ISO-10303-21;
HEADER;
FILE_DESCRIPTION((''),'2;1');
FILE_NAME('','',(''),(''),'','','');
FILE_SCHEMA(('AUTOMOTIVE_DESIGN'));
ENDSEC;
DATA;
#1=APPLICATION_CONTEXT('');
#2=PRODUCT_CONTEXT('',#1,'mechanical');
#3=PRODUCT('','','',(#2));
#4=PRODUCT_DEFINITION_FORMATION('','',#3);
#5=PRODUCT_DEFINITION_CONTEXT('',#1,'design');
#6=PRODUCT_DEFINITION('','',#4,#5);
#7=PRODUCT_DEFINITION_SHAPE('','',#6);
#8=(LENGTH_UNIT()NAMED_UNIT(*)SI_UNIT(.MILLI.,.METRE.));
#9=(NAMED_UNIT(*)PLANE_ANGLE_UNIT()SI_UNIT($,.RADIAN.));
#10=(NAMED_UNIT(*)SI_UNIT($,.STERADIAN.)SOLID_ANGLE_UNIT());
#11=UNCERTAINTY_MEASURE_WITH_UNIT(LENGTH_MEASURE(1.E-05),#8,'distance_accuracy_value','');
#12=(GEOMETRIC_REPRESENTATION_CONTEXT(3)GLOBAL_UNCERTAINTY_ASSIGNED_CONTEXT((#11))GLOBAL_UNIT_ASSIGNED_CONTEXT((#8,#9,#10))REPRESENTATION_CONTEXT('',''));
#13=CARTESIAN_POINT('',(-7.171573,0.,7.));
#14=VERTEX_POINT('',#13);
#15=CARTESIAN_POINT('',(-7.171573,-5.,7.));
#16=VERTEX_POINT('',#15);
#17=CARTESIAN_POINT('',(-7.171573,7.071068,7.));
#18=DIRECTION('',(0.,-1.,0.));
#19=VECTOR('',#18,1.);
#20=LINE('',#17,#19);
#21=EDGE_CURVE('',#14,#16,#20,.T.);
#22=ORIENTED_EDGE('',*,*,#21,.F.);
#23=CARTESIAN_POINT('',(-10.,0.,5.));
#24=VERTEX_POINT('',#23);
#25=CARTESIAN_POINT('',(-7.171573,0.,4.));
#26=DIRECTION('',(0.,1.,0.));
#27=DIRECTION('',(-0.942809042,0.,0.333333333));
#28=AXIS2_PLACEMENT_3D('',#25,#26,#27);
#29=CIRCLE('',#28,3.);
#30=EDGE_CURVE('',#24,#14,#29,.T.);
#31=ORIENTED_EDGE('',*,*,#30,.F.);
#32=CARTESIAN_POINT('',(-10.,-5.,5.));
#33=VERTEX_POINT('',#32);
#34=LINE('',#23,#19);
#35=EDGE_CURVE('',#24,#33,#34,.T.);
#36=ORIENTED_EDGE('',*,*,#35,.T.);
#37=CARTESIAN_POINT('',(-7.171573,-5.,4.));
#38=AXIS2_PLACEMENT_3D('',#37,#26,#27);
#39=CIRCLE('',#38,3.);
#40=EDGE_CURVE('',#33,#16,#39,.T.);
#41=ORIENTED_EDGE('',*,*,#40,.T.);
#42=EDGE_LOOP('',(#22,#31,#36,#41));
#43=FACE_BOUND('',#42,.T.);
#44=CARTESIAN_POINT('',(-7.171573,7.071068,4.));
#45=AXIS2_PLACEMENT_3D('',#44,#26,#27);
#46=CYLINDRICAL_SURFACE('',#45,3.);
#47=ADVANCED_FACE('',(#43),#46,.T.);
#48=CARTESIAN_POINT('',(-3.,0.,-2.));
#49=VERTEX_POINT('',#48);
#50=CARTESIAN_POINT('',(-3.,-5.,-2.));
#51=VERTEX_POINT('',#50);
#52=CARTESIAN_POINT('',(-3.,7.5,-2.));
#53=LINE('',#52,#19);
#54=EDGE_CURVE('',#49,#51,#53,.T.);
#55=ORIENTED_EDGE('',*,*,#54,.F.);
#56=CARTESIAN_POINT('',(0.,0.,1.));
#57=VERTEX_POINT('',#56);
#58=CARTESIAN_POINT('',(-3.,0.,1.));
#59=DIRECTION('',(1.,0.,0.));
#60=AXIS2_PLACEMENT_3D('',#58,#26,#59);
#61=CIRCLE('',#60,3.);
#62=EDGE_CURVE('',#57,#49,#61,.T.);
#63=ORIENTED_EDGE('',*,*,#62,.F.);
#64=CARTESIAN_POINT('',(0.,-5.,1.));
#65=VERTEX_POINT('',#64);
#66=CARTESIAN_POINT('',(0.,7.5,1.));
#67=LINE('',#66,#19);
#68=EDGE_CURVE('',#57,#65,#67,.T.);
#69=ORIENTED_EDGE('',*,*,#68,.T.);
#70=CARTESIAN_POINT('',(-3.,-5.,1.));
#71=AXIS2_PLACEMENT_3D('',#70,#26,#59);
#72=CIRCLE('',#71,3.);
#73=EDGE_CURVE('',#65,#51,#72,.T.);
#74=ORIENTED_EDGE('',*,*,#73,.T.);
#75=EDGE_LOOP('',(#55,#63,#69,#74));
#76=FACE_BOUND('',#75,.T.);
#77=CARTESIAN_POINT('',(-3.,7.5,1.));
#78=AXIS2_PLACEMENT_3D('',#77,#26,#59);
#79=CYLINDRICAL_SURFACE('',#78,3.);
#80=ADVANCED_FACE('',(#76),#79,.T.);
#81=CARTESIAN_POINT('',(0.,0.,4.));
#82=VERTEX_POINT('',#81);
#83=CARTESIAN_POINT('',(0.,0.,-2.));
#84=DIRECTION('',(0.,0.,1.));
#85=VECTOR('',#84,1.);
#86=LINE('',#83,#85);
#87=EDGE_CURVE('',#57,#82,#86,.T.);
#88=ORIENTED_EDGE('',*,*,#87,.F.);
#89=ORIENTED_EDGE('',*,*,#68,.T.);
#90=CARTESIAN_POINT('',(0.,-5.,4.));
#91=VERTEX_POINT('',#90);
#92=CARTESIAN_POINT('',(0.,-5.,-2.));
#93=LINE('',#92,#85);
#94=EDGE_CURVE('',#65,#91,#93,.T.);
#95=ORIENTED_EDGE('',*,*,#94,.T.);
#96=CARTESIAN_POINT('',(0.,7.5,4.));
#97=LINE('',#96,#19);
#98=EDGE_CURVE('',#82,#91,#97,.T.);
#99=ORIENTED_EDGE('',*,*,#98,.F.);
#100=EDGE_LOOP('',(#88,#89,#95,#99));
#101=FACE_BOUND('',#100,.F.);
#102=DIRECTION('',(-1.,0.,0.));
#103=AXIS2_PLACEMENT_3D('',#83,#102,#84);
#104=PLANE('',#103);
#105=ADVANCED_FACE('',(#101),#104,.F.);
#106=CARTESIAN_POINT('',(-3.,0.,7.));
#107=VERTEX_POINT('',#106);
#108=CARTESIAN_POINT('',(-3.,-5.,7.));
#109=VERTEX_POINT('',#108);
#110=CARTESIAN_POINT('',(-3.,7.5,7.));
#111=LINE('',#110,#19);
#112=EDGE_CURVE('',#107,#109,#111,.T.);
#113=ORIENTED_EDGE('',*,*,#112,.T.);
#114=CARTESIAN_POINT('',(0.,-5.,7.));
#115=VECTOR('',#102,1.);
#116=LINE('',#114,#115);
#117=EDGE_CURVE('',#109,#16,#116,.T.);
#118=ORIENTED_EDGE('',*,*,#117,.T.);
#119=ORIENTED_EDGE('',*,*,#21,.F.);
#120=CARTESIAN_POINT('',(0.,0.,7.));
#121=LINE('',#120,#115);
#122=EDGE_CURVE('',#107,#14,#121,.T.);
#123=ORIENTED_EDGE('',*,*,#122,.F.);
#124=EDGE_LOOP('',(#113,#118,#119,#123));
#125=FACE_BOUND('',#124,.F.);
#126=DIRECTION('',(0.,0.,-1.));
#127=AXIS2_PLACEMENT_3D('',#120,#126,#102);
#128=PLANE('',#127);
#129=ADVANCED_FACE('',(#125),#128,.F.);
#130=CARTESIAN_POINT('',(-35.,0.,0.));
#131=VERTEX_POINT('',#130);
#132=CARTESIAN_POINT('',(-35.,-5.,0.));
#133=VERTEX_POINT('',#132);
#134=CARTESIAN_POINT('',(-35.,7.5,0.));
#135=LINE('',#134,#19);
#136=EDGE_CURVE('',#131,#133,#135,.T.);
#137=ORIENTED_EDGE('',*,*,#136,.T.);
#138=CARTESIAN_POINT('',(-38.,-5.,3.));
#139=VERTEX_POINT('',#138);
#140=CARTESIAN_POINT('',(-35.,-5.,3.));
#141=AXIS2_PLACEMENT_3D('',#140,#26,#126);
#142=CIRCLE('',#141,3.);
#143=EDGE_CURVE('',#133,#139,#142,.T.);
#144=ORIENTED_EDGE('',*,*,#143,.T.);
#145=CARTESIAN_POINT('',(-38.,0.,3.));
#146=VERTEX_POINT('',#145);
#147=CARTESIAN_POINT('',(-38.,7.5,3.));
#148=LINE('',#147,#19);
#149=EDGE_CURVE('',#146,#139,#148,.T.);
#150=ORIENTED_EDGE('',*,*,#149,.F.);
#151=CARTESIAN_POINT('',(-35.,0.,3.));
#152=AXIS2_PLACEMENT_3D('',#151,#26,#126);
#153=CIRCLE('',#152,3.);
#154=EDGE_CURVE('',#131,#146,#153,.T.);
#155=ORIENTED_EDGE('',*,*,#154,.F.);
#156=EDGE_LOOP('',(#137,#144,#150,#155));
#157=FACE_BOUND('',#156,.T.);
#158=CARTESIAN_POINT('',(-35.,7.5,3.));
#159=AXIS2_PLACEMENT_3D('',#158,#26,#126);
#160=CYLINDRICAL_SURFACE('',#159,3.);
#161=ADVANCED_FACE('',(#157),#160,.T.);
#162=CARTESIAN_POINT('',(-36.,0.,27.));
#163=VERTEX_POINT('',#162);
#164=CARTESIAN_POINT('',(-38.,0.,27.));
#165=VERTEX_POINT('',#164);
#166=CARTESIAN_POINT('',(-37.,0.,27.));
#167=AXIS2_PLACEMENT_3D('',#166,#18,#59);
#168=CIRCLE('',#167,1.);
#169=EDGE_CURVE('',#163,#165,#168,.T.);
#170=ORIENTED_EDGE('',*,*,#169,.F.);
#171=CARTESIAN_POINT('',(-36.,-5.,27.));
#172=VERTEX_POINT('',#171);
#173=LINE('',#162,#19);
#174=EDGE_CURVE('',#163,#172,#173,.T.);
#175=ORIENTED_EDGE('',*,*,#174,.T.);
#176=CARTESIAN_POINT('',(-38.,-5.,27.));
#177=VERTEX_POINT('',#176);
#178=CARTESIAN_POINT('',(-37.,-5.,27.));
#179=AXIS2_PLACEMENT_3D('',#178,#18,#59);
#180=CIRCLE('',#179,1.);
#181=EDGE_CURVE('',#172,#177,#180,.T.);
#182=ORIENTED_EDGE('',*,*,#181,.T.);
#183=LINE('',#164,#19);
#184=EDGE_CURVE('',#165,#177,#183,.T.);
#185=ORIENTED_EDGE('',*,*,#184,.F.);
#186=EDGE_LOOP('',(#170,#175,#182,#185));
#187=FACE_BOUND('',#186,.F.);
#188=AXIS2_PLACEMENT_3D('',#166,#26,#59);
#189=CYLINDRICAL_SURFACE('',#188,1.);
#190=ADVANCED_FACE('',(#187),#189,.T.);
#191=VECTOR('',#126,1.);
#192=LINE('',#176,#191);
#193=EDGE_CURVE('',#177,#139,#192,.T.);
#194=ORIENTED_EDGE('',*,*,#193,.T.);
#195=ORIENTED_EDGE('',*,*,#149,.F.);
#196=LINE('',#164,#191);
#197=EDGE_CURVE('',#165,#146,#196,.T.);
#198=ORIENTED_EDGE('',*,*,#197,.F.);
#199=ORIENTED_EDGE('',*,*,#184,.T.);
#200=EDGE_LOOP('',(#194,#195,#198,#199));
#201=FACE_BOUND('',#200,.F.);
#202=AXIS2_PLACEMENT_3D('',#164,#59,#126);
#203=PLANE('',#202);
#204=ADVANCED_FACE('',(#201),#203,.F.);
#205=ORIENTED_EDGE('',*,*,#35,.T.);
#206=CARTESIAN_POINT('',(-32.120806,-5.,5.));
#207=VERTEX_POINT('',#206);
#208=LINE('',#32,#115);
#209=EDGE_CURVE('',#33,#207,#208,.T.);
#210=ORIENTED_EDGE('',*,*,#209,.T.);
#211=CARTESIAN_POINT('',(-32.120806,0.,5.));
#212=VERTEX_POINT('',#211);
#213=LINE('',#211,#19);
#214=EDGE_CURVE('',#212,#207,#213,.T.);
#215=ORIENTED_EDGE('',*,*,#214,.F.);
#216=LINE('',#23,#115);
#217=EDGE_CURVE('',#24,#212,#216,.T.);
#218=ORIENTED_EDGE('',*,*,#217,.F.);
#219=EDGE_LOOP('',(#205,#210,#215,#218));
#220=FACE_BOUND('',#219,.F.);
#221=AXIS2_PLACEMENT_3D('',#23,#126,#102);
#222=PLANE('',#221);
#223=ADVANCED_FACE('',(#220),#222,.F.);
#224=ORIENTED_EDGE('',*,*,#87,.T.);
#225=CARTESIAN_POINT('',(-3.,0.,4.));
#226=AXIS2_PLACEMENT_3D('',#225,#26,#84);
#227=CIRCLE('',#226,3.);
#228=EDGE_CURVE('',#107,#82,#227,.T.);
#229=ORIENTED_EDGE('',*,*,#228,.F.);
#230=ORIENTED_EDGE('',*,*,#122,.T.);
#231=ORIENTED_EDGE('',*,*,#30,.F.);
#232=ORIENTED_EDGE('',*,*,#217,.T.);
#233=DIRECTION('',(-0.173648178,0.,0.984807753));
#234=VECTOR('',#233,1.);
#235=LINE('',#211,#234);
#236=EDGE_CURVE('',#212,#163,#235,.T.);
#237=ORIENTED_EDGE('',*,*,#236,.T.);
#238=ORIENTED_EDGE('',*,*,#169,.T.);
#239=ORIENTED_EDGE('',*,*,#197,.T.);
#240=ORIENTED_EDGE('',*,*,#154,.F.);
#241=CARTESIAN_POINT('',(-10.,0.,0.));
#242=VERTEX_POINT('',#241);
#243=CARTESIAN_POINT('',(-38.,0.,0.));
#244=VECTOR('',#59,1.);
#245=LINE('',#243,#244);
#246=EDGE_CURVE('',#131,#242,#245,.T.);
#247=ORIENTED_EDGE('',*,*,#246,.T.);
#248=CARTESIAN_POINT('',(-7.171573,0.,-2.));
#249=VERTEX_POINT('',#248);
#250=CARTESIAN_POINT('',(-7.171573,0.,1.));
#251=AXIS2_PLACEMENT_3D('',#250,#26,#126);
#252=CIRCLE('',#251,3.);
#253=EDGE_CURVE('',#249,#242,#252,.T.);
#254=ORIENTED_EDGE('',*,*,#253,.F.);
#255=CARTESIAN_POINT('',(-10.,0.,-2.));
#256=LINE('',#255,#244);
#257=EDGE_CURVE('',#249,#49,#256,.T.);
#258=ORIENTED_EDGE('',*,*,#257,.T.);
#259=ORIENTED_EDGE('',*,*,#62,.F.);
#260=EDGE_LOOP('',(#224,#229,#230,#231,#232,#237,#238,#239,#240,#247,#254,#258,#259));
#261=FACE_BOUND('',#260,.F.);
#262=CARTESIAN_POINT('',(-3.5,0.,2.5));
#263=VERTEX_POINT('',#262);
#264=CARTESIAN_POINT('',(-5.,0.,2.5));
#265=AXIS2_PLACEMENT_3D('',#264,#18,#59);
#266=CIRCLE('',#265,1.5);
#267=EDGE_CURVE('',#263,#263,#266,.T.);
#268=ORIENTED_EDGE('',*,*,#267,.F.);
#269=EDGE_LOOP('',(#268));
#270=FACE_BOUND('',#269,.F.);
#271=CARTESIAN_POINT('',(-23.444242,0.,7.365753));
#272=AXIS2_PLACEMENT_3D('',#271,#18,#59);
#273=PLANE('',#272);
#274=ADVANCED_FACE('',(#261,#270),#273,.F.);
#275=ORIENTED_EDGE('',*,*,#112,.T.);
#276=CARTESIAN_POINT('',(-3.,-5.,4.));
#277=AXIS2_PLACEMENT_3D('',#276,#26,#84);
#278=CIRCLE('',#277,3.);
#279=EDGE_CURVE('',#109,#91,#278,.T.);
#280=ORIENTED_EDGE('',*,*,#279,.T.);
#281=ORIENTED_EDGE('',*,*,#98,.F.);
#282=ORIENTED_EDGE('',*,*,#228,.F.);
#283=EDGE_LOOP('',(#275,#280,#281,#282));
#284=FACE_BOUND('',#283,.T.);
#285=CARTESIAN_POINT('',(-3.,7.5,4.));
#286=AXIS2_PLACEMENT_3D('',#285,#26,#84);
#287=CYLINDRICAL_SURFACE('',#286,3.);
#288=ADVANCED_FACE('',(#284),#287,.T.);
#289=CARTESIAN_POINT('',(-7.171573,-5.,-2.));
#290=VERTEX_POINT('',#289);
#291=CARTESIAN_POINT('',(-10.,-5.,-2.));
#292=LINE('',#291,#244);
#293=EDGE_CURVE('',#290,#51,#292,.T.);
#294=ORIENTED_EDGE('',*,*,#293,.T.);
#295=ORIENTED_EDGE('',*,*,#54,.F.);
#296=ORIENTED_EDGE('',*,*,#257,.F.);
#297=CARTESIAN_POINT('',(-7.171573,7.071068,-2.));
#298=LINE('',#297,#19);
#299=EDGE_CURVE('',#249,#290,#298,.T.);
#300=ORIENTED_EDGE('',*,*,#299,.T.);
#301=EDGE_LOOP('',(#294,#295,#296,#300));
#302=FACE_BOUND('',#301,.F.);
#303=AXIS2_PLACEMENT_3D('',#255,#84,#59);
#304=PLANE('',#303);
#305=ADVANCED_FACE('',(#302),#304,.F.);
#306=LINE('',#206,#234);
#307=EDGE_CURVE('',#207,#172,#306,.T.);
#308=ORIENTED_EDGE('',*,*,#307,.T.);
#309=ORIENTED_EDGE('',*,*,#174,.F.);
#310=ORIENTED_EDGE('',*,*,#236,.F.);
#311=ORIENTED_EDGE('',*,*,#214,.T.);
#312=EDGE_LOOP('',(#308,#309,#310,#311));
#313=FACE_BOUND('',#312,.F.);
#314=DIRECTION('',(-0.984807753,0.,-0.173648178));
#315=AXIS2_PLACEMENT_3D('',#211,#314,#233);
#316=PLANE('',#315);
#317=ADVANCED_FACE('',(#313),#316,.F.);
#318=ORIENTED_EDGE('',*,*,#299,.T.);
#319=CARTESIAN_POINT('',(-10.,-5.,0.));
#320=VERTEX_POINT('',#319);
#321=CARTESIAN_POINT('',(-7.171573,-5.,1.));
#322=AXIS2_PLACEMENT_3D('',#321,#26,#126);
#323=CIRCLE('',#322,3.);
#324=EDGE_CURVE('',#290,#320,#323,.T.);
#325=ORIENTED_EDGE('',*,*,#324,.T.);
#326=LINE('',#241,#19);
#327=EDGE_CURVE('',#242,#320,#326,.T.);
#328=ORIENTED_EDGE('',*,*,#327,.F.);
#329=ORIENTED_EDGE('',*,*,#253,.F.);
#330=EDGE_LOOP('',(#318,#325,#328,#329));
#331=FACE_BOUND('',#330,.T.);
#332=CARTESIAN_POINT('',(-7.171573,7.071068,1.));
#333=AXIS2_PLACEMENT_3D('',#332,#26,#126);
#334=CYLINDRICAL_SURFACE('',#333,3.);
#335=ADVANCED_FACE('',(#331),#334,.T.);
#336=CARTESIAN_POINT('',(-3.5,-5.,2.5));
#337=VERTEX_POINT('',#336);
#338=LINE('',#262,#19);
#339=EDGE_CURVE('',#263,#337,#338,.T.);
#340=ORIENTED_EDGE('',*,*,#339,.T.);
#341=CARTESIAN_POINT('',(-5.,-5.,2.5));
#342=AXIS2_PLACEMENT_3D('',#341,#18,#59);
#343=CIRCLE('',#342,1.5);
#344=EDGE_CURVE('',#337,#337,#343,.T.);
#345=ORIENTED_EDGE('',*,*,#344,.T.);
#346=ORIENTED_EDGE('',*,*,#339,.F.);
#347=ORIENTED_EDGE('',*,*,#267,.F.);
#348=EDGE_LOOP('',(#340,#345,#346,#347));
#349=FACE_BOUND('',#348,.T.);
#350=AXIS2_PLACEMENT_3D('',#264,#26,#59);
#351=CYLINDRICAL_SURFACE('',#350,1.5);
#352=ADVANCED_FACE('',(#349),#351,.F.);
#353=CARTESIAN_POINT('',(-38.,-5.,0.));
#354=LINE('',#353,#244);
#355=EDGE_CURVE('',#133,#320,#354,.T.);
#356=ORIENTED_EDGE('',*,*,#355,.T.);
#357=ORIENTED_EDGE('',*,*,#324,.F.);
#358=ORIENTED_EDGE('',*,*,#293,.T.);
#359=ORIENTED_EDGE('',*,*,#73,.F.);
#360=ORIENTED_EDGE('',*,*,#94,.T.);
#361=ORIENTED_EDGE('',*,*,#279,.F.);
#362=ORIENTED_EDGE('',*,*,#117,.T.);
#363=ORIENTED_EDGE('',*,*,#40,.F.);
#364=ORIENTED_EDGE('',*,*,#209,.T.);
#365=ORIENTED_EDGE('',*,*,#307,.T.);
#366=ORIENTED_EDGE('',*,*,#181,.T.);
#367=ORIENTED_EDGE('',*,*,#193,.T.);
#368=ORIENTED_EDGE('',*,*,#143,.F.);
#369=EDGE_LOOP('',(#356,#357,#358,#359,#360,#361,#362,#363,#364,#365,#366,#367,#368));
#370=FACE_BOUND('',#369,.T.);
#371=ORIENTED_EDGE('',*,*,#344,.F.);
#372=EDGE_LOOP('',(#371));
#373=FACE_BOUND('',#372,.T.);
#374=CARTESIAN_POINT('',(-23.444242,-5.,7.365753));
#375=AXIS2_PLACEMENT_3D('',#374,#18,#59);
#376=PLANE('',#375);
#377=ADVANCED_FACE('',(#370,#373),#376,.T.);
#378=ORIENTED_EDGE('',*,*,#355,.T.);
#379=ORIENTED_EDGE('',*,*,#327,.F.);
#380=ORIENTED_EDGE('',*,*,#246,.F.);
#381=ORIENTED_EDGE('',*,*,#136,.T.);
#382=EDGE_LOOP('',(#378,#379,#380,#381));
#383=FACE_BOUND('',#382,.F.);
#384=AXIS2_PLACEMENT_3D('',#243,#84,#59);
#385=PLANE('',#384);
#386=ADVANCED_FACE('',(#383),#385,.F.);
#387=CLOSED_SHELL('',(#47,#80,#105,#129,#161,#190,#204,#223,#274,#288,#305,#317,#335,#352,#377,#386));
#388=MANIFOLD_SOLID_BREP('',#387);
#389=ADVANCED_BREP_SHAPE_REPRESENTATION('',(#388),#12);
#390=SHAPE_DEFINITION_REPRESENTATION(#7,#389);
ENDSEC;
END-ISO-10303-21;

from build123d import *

# Parameters (mm, degrees)
F0_R        = 1.5
F1_DEPTH    = 5
F2_T1_DEPTH = 20
F2_T3_DEPTH = 19.1421356237


# Not quite as in the source:
# - a fillet or chamfer that OpenCascade refuses, or shapes differently, is made with other operations: its cross-section is extruded or revolved along the edge and cut away or added


with BuildPart() as f1:
    # F0 (on Front) → F1 (new body)
    with BuildSketch(Plane.XZ):
        with BuildLine():
            Line((-38, 0), (-10, 0))
            Line((-10, 0), (-10, -2))
            Line((-10, -2), (0, -2))
            Line((0, -2), (0, 0))
            Line((0, 0), (0, 5))
            Line((0, 5), (0, 7))
            Line((0, 7), (-10, 7))
            Line((-10, 7), (-10, 5))
            Line((-10, 5), (-32.1208064244, 5))
            Line((-32.1208064244, 5), (-36, 27))
            ThreePointArc((-36, 27), (-37, 28), (-38, 27))
            Line((-38, 27), (-38, 0))
        make_face()
        with Locations((-5, 2.5)):
            Circle(F0_R, mode=Mode.SUBTRACT)
    extrude(amount=F1_DEPTH)

    # F2: fillet of radius 3 on 5 edges, made by hand

    # F2_s2 → F2_t1 (cut)
    with BuildSketch(Plane.XZ.offset(-7.5)):
        with BuildLine():
            ThreePointArc((-3, 7), (-0.8786796564, 6.1213203436), (0, 4))
            Line((0, 4), (0, 7))
            Line((0, 7), (-3, 7))
        make_face()
        with BuildLine():
            ThreePointArc((0, 1), (-0.8786796564, -1.1213203436), (-3, -2))
            Line((-3, -2), (0, -2))
            Line((0, -2), (0, 1))
        make_face()
        with BuildLine():
            ThreePointArc((-35, 0), (-37.1213203436, 0.8786796564), (-38, 3))
            Line((-38, 3), (-38, 0))
            Line((-38, 0), (-35, 0))
        make_face()
    extrude(amount=F2_T1_DEPTH, mode=Mode.SUBTRACT)

    # F2_s4 → F2_t3 (cut)
    with BuildSketch(Plane.XZ.offset(-7.0710678119)):
        with BuildLine():
            ThreePointArc((-10, 5), (-8.9036236828, 6.4494897428), (-7.1715728753, 7))
            Line((-7.1715728753, 7), (-10, 7))
            Line((-10, 7), (-10, 5))
        make_face()
        with BuildLine():
            ThreePointArc((-7.1715728753, -2), (-8.9036236828, -1.4494897428), (-10, 0))
            Line((-10, 0), (-10, -2))
            Line((-10, -2), (-7.1715728753, -2))
        make_face()
    extrude(amount=F2_T3_DEPTH, mode=Mode.SUBTRACT)


solid = f1.part
